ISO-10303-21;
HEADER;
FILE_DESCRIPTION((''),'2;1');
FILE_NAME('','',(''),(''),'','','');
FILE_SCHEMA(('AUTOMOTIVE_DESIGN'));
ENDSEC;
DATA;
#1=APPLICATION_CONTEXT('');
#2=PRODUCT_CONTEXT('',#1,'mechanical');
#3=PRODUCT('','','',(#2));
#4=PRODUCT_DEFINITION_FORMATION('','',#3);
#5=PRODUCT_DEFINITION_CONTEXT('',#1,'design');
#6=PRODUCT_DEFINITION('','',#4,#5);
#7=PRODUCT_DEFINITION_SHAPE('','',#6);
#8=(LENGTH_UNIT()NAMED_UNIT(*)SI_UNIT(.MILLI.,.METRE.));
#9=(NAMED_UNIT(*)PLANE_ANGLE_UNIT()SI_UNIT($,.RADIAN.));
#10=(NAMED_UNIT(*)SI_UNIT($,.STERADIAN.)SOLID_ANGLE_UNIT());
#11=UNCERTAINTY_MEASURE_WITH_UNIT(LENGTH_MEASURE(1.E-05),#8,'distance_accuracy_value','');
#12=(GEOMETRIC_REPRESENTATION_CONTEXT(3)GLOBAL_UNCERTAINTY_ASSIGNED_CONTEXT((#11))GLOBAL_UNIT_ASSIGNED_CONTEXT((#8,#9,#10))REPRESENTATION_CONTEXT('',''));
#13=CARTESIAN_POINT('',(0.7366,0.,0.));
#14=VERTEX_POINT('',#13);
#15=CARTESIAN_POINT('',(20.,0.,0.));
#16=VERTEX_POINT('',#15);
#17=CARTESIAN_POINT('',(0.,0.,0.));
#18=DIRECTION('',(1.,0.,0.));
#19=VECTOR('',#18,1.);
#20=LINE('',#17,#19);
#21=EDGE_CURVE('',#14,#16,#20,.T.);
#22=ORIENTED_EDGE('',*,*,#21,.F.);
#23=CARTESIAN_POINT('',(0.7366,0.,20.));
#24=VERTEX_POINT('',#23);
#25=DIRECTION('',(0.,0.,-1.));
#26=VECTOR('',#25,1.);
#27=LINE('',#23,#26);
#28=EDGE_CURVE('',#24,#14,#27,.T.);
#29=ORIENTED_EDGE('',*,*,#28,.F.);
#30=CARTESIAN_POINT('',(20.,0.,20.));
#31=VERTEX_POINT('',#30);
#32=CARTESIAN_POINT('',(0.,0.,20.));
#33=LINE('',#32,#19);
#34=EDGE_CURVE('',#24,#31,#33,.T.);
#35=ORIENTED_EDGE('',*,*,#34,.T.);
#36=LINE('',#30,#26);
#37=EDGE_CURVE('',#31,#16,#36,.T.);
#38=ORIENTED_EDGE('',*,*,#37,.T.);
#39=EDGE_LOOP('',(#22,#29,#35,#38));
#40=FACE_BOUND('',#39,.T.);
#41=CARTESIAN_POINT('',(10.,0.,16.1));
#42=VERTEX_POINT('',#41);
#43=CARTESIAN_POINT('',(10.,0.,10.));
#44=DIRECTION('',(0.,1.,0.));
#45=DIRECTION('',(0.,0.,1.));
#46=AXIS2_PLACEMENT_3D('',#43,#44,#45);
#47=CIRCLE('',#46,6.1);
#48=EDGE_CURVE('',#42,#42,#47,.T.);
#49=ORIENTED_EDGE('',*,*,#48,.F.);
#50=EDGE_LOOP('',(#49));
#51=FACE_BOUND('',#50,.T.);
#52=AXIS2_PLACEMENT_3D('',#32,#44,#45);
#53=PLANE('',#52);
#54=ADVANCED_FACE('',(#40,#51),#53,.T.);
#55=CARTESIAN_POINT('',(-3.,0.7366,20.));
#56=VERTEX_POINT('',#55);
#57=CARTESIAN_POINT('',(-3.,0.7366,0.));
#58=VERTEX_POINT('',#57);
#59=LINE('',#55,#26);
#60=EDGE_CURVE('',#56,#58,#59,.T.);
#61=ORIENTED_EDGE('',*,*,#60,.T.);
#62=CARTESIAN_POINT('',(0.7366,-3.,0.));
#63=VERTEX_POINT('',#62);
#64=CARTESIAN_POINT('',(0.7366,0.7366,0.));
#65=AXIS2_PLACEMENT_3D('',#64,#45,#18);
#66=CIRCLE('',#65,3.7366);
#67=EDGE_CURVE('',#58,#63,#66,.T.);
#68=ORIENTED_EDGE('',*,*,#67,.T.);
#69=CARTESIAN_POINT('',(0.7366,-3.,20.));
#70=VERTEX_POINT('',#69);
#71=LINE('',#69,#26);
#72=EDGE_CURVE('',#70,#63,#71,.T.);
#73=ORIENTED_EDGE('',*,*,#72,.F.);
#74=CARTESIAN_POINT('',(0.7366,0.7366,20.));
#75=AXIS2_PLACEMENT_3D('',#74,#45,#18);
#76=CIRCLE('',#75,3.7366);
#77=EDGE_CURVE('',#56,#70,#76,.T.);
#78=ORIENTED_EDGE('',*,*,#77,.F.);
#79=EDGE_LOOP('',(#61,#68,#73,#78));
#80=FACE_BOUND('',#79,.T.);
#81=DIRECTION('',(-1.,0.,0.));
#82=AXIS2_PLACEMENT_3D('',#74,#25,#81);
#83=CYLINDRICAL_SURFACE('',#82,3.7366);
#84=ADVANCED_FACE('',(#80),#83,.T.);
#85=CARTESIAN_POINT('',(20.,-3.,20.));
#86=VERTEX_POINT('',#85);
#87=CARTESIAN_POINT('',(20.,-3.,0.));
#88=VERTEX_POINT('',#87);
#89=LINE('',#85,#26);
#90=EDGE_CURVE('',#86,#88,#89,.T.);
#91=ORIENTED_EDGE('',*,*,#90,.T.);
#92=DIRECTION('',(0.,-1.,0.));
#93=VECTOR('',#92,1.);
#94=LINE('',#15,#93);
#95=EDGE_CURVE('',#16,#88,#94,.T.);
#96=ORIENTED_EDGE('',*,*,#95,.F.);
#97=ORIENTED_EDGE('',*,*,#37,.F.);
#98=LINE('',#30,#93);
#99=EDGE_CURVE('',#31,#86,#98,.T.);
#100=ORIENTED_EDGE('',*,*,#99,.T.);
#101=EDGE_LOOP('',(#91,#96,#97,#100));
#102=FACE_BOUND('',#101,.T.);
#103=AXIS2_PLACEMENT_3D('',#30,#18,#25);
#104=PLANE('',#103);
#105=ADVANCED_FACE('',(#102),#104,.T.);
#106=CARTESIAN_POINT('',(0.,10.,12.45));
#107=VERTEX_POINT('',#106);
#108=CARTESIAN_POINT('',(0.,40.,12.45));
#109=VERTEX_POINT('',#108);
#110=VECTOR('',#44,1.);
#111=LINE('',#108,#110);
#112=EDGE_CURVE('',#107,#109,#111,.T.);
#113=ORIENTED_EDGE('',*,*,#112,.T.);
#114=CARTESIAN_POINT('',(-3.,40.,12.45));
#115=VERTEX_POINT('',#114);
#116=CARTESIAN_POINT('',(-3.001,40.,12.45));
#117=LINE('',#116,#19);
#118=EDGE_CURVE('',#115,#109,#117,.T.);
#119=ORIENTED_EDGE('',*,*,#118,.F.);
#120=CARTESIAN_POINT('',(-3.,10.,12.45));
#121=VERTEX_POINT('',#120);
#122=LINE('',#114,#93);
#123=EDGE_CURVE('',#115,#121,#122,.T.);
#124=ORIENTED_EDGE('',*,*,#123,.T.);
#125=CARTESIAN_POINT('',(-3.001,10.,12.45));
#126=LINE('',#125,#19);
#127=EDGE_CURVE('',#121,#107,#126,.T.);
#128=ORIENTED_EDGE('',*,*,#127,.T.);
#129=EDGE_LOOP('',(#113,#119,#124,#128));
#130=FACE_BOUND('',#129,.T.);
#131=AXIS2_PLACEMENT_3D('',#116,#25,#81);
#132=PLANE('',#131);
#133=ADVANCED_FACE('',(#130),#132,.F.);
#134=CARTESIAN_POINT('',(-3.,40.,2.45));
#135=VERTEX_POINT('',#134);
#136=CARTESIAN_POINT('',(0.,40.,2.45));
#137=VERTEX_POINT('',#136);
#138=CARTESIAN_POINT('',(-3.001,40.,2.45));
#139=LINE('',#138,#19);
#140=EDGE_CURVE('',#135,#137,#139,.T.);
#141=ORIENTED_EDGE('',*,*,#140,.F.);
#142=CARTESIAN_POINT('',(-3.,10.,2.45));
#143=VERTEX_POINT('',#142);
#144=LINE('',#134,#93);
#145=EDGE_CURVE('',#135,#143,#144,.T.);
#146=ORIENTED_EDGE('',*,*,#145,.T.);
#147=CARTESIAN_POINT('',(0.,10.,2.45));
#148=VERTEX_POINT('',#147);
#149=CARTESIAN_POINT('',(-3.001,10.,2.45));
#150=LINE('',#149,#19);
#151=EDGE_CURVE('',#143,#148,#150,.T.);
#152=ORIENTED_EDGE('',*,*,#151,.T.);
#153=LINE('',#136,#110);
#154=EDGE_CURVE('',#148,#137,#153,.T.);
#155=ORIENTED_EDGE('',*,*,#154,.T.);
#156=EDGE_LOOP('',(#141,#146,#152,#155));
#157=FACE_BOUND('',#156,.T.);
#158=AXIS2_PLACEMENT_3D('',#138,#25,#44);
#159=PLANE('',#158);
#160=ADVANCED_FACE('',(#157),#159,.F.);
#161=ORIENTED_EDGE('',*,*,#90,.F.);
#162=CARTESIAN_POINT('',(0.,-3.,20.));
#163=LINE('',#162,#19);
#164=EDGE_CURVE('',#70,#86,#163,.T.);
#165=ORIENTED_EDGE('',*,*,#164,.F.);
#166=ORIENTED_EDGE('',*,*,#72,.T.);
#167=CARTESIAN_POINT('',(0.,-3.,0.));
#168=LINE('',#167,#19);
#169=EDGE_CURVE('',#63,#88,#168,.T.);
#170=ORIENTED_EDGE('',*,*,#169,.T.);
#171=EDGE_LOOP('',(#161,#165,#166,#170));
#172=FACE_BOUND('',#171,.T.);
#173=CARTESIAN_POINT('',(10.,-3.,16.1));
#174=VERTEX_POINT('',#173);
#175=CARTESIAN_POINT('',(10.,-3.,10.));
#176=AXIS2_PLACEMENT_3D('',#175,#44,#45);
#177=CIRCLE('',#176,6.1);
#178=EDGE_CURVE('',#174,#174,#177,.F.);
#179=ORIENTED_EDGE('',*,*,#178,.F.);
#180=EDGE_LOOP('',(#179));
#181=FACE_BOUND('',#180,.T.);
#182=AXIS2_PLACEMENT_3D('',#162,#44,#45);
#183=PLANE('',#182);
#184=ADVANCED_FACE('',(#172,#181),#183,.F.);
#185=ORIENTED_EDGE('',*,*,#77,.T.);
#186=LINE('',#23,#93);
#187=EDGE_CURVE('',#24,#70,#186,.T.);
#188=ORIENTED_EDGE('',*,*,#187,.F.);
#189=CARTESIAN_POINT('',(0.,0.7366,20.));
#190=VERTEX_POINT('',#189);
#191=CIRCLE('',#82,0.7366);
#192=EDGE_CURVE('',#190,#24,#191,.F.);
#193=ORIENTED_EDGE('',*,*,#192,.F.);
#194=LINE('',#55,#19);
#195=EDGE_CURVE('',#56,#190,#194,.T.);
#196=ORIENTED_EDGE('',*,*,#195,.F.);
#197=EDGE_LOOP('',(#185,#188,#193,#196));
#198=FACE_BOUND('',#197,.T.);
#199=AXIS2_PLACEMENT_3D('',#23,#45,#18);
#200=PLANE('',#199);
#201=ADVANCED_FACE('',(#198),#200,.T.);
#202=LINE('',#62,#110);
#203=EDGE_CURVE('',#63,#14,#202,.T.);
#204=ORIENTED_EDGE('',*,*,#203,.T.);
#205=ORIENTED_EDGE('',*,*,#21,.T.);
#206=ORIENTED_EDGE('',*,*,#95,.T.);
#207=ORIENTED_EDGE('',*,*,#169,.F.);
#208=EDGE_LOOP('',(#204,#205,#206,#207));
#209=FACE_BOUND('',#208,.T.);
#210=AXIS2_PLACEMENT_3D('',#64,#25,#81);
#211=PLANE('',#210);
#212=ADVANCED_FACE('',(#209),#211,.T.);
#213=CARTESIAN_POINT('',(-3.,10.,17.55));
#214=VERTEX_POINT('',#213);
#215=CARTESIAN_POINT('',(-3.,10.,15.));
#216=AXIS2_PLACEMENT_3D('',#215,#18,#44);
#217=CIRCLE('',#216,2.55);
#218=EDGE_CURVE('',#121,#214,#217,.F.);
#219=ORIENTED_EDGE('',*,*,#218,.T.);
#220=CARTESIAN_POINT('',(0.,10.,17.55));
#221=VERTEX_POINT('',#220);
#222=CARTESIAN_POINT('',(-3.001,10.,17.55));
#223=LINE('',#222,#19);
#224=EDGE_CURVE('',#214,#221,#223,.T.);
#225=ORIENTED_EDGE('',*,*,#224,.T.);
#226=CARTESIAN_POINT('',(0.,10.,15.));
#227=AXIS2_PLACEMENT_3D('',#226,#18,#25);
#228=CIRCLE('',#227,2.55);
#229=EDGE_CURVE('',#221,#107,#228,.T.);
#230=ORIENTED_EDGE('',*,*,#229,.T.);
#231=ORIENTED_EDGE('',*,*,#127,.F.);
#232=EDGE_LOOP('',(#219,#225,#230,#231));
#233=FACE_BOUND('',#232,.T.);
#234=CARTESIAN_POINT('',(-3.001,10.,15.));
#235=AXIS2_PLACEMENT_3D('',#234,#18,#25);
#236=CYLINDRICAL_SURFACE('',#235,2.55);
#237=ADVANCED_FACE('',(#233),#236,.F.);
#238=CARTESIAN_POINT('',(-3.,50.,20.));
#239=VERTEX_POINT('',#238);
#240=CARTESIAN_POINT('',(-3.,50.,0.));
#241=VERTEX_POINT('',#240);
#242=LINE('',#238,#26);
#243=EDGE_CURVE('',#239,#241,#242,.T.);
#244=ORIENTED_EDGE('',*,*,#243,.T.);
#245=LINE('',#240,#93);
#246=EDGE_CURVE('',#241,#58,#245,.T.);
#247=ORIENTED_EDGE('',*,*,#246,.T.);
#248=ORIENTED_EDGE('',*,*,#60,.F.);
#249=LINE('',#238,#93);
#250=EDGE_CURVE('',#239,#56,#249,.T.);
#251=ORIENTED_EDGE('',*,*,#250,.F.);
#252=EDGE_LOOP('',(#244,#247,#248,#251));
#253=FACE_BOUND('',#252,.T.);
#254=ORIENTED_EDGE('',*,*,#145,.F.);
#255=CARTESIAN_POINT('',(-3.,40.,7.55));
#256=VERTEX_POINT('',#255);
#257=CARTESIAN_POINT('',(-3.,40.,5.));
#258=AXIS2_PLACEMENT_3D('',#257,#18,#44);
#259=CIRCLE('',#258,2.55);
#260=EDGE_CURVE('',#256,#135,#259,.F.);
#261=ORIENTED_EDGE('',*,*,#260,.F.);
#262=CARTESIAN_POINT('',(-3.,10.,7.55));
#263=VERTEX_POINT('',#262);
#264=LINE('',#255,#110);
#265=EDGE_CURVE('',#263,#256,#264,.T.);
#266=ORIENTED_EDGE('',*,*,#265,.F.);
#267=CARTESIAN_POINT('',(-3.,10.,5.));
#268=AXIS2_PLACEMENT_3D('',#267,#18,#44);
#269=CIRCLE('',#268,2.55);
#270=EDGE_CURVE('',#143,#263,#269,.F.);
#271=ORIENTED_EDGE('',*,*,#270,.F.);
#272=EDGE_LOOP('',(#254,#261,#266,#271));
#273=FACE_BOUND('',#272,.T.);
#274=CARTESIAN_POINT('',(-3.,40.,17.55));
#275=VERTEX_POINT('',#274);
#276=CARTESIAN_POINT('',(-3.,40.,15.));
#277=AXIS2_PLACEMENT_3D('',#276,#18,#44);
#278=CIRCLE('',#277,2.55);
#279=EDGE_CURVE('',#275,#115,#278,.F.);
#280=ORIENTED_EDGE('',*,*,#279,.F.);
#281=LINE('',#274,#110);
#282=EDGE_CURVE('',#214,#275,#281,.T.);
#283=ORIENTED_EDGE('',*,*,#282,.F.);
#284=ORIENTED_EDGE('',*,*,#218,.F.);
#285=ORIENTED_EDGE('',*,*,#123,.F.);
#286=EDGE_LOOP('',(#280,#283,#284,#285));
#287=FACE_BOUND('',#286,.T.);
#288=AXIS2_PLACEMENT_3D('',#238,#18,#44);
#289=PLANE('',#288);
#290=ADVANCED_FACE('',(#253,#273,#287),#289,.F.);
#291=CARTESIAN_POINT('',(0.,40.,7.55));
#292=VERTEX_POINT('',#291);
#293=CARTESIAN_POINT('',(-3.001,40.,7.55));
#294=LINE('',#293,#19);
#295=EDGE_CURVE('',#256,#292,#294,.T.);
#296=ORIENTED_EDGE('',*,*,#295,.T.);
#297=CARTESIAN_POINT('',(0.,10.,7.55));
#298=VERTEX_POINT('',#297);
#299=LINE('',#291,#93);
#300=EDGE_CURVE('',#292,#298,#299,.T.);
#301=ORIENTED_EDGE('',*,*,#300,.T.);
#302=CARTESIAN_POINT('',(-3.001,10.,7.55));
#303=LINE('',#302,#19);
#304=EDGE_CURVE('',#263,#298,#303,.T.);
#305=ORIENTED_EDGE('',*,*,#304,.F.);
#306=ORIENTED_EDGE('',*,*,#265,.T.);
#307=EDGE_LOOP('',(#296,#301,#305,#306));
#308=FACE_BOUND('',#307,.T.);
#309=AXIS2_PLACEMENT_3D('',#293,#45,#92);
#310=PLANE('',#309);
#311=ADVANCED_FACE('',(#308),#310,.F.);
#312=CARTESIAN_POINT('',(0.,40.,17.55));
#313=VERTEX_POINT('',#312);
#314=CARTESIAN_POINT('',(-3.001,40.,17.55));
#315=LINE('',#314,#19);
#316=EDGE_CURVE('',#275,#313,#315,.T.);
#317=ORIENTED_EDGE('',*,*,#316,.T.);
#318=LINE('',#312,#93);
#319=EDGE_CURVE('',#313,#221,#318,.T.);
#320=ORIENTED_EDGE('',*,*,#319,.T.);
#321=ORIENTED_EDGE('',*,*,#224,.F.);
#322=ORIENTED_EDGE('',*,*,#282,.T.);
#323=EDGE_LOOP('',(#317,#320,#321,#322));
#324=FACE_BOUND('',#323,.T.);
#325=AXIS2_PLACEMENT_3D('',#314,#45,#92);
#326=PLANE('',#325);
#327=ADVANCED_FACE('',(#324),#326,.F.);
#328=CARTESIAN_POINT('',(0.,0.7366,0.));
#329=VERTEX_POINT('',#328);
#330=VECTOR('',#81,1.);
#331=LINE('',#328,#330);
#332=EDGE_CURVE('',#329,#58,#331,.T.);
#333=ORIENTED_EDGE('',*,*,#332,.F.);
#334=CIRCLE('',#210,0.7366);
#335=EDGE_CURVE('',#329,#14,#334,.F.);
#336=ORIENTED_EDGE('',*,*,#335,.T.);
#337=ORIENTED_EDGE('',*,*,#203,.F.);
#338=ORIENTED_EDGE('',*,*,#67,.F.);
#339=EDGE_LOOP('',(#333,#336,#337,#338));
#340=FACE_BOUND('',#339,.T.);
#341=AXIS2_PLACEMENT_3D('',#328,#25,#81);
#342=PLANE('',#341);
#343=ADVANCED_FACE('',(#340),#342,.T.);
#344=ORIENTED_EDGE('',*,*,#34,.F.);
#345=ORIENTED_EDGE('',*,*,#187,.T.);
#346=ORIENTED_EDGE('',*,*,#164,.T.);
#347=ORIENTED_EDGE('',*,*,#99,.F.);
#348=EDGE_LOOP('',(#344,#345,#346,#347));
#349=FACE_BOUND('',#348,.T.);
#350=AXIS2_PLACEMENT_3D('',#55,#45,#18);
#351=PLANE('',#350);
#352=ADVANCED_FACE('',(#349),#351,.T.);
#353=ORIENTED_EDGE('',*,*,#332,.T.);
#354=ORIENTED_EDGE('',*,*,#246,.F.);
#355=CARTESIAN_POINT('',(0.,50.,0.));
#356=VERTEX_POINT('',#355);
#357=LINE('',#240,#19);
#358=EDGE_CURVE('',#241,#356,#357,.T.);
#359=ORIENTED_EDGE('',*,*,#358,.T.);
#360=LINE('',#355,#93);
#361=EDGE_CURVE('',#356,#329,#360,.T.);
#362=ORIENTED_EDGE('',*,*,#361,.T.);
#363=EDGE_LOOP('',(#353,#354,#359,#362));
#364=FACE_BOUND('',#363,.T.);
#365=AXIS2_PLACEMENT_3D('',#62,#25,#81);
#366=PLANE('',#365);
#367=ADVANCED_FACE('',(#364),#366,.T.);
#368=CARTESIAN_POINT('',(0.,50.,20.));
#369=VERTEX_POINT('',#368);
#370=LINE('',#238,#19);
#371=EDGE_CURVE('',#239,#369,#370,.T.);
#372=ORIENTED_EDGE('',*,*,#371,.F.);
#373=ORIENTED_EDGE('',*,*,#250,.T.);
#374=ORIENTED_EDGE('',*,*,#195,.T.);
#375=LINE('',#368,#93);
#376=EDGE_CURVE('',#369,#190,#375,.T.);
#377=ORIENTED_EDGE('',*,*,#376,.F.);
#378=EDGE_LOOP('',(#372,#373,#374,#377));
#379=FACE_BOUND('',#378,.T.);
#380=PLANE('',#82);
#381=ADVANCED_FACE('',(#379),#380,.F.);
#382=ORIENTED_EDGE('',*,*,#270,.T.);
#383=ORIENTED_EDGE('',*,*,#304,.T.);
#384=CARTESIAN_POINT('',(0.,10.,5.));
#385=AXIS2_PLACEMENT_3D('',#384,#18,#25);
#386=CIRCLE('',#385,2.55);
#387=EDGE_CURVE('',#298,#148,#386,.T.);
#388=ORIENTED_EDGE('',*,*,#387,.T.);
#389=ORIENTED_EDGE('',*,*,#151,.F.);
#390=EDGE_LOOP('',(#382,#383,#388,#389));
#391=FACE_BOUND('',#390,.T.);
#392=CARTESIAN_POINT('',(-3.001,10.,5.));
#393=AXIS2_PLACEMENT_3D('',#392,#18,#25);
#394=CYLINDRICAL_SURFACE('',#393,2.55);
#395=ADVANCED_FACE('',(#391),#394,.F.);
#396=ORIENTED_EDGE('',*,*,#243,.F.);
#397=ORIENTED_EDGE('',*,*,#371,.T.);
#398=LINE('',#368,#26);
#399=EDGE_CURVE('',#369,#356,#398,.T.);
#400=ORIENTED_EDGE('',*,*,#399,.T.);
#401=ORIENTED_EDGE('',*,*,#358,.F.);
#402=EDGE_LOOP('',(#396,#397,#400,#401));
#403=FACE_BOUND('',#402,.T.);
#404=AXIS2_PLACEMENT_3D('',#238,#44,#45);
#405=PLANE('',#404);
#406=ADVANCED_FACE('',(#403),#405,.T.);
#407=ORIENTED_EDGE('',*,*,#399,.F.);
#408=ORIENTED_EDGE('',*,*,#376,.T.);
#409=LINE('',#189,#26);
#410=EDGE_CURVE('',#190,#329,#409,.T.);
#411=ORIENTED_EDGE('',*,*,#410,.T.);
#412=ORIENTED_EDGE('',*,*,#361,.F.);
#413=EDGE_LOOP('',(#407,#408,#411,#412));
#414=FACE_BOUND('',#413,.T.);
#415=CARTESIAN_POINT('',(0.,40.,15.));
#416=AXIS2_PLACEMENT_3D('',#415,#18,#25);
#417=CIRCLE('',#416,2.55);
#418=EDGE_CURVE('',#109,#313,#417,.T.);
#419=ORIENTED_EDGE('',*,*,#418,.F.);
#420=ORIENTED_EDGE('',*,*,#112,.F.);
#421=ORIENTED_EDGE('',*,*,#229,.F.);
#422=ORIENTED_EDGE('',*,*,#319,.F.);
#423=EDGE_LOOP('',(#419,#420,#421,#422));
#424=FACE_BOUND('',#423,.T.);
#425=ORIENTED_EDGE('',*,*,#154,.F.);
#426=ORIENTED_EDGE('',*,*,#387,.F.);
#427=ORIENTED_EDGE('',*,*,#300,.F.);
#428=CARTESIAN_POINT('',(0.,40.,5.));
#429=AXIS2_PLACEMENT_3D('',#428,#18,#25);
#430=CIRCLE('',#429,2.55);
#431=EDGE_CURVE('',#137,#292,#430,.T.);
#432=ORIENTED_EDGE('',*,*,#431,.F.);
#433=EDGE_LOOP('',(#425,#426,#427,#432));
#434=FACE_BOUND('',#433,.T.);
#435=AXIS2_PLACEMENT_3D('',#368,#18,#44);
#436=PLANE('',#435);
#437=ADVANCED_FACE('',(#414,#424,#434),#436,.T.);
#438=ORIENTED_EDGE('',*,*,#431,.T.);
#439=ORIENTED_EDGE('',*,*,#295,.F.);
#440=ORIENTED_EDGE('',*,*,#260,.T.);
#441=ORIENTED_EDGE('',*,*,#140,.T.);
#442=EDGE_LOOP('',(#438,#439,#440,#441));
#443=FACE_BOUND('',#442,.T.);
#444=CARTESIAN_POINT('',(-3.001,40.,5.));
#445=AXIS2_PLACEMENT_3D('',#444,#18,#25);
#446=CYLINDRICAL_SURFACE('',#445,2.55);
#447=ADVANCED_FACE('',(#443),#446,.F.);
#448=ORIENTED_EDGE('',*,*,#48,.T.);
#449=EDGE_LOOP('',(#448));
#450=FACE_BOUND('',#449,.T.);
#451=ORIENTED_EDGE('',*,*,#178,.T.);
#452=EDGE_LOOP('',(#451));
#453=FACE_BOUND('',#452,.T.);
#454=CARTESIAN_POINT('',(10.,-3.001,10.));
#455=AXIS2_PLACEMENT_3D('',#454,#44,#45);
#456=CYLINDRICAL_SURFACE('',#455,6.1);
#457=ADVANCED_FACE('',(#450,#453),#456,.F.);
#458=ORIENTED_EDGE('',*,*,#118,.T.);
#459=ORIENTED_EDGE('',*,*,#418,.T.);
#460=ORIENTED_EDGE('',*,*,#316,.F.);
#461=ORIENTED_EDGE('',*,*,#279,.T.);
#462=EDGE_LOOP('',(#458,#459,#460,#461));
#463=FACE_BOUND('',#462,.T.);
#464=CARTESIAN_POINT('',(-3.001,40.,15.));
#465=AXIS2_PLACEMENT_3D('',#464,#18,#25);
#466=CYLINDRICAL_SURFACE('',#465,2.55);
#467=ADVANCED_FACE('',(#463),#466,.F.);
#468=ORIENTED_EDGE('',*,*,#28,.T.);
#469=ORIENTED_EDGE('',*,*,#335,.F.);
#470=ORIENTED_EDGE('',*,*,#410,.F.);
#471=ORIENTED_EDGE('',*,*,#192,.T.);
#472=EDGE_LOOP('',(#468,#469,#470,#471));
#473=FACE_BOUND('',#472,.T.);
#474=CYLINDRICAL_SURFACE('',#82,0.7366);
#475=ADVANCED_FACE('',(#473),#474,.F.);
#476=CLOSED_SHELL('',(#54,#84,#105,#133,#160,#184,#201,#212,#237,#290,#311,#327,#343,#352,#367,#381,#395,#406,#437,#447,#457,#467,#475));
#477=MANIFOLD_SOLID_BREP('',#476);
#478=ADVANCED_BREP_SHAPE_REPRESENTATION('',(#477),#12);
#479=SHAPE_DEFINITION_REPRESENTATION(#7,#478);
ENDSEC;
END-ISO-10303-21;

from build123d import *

# Parameters (mm, degrees)
BASE_FLANGE1_DEPTH = 20
CUT_EXTRUDE1_REACH = 59.446
SKETCH6_R          = 6.1
CUT_EXTRUDE2_REACH = 59.446


# Sheet-metal steps are written as plain solids
with BuildPart() as part:
    # Sketch1 → Base-Flange1 (new body)
    with BuildSketch(Plane.XY):
        with BuildLine():
            Line((0, 50), (0, 0.7366))
            ThreePointArc((0, 0.7366), (0.215745145, 0.215745145), (0.7366, 0))
            Line((0.7366, 0), (20, 0))
            Line((20, 0), (20, -3))
            Line((20, -3), (0.7366, -3))
            ThreePointArc((0.7366, -3), (-1.905575199, -1.905575199), (-3, 0.7366))
            Line((-3, 0.7366), (-3, 50))
            Line((-3, 50), (0, 50))
        make_face()
    extrude(amount=BASE_FLANGE1_DEPTH)

    # Sketch6 → Cut-Extrude1 (cut, up to next)
    with BuildSketch(Plane(origin=(0, 0, 0), x_dir=(1, 0, 0), z_dir=(0, 1, 0)), mode=Mode.PRIVATE) as cut_extrude1_sk1:
        with Locations(Location((10, -10, 0), (0, 0, 270))):
            Circle(SKETCH6_R)
    cut_extrude1_tool1 = extrude(cut_extrude1_sk1.sketch, amount=-CUT_EXTRUDE1_REACH, mode=Mode.PRIVATE) & part.part
    add(cut_extrude1_tool1.solids().sort_by_distance((10, 0, 10))[0], mode=Mode.SUBTRACT)

    # Sketch7 → Cut-Extrude2 (cut, up to next)
    with BuildSketch(Plane(origin=(0, 0, 0), x_dir=(0, 0, -1), z_dir=(1, 0, 0)), mode=Mode.PRIVATE) as cut_extrude2_sk1:
        with BuildLine():
            Line((-12.45, 40), (-12.45, 10))
            ThreePointArc((-12.45, 10), (-15, 7.45), (-17.55, 10))
            Line((-17.55, 10), (-17.55, 40))
            ThreePointArc((-17.55, 40), (-15, 42.55), (-12.45, 40))
        make_face()
    cut_extrude2_tool1 = extrude(cut_extrude2_sk1.sketch, amount=-CUT_EXTRUDE2_REACH, mode=Mode.PRIVATE) & part.part
    # Sketch7 → Cut-Extrude2 (cut, up to next)
    with BuildSketch(Plane(origin=(0, 0, 0), x_dir=(0, 0, -1), z_dir=(1, 0, 0)), mode=Mode.PRIVATE) as cut_extrude2_sk2:
        with BuildLine():
            Line((-2.45, 40), (-2.45, 10))
            ThreePointArc((-2.45, 10), (-5, 7.45), (-7.55, 10))
            Line((-7.55, 10), (-7.55, 40))
            ThreePointArc((-7.55, 40), (-5, 42.55), (-2.45, 40))
        make_face()
    cut_extrude2_tool2 = extrude(cut_extrude2_sk2.sketch, amount=-CUT_EXTRUDE2_REACH, mode=Mode.PRIVATE) & part.part
    add(cut_extrude2_tool1.solids().sort_by_distance((0, 25, 15))[0], mode=Mode.SUBTRACT)
    add(cut_extrude2_tool2.solids().sort_by_distance((0, 25, 5))[0], mode=Mode.SUBTRACT)


solid = part.part
